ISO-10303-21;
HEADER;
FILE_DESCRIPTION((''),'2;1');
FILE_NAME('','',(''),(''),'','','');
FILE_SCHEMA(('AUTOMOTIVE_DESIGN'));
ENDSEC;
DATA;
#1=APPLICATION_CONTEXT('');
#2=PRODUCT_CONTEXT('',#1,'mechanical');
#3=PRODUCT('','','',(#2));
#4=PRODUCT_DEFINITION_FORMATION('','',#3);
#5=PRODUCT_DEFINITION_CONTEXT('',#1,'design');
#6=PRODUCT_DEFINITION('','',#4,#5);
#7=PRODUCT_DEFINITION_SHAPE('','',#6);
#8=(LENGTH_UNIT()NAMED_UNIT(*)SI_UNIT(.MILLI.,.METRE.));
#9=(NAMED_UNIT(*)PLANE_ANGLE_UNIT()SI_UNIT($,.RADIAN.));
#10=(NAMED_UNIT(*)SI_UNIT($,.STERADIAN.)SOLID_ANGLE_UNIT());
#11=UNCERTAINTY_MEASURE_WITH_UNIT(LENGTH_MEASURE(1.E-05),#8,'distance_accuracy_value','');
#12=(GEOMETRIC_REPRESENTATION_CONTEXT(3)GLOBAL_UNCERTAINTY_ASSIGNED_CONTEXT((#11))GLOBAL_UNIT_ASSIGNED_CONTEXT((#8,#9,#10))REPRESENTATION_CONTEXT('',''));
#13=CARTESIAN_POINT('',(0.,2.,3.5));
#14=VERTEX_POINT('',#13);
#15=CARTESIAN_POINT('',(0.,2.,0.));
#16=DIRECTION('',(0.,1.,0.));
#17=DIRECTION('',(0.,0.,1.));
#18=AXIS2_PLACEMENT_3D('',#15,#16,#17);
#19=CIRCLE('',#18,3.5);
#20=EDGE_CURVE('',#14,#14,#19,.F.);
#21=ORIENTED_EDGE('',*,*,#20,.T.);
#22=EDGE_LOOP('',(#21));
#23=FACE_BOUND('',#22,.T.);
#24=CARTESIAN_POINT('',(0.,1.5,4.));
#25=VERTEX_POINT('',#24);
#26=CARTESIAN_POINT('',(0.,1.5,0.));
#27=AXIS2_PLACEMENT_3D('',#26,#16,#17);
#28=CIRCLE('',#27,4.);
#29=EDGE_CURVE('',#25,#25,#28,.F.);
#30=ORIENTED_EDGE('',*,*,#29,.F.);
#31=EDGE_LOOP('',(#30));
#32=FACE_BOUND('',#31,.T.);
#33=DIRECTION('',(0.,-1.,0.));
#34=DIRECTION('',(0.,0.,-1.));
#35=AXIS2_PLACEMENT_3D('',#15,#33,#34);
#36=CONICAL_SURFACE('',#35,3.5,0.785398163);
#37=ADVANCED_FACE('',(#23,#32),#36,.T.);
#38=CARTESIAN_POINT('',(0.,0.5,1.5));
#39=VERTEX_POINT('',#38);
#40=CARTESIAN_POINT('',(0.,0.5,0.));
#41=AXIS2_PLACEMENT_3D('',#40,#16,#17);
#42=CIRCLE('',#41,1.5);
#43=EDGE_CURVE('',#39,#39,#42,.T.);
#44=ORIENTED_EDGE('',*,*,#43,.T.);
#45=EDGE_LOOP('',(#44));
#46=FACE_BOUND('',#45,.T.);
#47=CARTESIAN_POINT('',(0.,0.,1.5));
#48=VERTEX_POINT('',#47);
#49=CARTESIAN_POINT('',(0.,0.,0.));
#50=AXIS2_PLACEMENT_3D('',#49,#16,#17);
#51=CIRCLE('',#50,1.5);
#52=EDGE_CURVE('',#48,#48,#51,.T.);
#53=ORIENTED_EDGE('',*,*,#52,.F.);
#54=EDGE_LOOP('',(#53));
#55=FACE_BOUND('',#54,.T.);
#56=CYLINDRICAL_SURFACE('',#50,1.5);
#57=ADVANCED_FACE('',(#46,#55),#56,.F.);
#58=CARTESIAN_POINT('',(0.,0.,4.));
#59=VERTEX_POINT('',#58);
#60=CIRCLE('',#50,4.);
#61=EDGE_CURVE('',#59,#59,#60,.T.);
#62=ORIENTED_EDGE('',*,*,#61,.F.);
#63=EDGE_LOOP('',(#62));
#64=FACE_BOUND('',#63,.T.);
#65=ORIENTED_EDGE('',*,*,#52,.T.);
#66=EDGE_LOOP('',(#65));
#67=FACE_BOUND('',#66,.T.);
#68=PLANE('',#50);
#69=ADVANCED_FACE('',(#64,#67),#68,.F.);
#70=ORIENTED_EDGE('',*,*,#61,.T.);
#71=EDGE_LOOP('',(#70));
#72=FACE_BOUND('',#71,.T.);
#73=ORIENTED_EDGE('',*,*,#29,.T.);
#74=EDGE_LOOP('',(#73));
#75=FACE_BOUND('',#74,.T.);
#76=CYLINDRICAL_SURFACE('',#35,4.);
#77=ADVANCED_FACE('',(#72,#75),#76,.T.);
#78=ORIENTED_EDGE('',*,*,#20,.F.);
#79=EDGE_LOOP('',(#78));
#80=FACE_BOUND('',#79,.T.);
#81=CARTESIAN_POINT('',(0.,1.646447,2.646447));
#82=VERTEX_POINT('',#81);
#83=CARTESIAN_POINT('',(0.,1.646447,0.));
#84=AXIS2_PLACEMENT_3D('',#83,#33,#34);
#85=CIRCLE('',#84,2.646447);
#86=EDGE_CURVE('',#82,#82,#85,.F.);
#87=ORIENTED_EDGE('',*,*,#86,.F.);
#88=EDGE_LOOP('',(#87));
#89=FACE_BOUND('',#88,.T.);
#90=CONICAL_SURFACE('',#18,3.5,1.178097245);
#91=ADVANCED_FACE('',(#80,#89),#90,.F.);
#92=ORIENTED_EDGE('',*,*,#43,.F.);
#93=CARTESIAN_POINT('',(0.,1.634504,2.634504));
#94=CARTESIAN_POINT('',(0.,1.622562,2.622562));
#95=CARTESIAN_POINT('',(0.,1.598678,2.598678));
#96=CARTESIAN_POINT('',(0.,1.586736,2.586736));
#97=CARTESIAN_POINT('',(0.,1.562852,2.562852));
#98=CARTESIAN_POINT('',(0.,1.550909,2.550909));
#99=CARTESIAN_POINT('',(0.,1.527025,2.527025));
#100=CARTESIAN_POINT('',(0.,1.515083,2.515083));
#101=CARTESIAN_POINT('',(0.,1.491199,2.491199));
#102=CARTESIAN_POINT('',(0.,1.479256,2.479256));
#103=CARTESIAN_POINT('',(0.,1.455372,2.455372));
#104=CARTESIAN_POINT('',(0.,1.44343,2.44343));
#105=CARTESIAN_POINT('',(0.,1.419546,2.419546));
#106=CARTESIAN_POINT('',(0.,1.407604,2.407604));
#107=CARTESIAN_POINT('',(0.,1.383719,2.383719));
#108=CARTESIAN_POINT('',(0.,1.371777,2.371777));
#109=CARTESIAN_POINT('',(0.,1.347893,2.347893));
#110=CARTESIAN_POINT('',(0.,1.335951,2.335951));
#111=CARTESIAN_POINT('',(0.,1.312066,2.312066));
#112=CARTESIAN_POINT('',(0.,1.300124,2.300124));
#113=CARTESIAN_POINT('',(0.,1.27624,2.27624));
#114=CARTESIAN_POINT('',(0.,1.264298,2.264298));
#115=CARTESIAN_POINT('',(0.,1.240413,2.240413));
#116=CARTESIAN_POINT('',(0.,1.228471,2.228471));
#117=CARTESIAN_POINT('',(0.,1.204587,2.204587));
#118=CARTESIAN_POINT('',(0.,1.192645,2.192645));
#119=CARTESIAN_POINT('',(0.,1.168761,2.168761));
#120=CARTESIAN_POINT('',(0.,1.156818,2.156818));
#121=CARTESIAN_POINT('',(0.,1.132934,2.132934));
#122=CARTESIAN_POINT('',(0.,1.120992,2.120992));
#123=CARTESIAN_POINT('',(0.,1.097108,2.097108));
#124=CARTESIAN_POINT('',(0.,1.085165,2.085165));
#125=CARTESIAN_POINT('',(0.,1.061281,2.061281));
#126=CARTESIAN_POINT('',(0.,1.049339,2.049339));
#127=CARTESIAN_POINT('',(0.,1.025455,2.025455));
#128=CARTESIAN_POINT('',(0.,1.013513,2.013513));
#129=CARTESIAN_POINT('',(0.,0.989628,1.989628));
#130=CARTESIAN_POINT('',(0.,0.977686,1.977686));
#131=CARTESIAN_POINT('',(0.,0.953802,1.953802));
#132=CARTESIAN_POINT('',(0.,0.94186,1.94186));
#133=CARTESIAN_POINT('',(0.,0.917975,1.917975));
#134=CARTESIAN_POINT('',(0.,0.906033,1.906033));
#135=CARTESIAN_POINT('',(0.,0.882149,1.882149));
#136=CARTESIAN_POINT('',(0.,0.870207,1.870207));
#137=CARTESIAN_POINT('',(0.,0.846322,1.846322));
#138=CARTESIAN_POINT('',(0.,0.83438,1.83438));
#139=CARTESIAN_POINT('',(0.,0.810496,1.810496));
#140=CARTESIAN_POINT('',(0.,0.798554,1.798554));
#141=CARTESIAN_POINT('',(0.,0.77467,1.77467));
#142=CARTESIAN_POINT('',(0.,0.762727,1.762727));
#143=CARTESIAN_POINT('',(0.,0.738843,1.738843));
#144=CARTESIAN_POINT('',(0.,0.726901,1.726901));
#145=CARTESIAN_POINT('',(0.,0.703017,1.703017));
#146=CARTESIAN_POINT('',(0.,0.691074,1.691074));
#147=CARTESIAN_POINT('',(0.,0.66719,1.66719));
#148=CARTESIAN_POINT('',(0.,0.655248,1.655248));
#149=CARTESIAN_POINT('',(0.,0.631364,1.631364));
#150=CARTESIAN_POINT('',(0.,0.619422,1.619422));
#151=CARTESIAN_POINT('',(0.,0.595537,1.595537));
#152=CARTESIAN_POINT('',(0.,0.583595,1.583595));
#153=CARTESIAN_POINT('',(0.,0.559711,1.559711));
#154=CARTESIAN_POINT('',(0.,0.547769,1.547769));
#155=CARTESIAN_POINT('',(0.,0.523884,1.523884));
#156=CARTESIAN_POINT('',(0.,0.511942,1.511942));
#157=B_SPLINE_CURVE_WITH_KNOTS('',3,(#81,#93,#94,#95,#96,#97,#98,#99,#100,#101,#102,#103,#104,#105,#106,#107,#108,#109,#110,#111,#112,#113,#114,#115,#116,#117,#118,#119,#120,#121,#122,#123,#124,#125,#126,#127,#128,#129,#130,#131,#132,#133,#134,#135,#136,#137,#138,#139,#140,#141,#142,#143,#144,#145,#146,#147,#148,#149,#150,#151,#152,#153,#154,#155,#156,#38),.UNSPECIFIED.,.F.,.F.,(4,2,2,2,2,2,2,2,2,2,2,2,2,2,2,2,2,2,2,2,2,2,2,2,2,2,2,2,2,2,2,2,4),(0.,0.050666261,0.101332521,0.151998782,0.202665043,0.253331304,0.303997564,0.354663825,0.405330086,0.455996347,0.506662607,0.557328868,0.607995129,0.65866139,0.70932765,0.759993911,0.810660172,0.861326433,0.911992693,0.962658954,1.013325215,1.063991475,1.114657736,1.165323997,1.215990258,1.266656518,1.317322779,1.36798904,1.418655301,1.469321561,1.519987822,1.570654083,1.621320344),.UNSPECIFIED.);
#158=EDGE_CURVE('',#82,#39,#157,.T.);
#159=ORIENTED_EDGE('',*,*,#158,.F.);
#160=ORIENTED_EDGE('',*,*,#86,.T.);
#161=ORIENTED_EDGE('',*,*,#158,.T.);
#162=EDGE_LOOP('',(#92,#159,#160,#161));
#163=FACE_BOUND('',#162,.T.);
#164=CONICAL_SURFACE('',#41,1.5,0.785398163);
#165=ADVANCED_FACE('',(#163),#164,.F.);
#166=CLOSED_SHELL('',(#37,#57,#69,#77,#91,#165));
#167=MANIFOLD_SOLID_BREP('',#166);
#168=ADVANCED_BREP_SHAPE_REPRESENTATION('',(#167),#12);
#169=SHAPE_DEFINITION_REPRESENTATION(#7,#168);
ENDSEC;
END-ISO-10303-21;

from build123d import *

# Parameters (mm, degrees)
SKETCH_1_R          = 4
EXTRUDE_1_DEPTH     = 2
SKETCH_2_R          = 1.5
CUT_EXTRUDE_1_DEPTH = 7
CHAMFER_1_SIZE      = 1.5
CHAMFER_2_SIZE      = 0.5


with BuildPart() as part:
    # 草图1 → 凸台-拉伸1 (new body)
    with BuildSketch(Plane(origin=(0, 0, 0), x_dir=(1, 0, 0), z_dir=(0, 1, 0))):
        with Locations(Location((0, 0, 0), (0, 0, 270))):
            Circle(SKETCH_1_R)
    extrude(amount=EXTRUDE_1_DEPTH)

    # 草图2 → 切除-拉伸1 (cut, through all)
    with BuildSketch(Plane(origin=(0, 2, 0), x_dir=(1, 0, 0), z_dir=(0, 1, 0))):
        with Locations(Location((0, 0, 0), (0, 0, 270))):
            Circle(SKETCH_2_R)
    extrude(amount=-CUT_EXTRUDE_1_DEPTH, mode=Mode.SUBTRACT)

    # 倒角1
    chamfer_1_edges = [part.edges().sort_by_distance(p)[0] for p in [
        (0, 2, -1.5),
    ]]
    chamfer(chamfer_1_edges, length=CHAMFER_1_SIZE)

    # 倒角2
    chamfer_2_edges = [part.edges().sort_by_distance(p)[0] for p in [
        (0, 2, -3),
        (0, 2, -4),
    ]]
    chamfer(chamfer_2_edges, length=CHAMFER_2_SIZE - 0.0001)  # a hair under: the kernel refuses the full size


solid = part.part
